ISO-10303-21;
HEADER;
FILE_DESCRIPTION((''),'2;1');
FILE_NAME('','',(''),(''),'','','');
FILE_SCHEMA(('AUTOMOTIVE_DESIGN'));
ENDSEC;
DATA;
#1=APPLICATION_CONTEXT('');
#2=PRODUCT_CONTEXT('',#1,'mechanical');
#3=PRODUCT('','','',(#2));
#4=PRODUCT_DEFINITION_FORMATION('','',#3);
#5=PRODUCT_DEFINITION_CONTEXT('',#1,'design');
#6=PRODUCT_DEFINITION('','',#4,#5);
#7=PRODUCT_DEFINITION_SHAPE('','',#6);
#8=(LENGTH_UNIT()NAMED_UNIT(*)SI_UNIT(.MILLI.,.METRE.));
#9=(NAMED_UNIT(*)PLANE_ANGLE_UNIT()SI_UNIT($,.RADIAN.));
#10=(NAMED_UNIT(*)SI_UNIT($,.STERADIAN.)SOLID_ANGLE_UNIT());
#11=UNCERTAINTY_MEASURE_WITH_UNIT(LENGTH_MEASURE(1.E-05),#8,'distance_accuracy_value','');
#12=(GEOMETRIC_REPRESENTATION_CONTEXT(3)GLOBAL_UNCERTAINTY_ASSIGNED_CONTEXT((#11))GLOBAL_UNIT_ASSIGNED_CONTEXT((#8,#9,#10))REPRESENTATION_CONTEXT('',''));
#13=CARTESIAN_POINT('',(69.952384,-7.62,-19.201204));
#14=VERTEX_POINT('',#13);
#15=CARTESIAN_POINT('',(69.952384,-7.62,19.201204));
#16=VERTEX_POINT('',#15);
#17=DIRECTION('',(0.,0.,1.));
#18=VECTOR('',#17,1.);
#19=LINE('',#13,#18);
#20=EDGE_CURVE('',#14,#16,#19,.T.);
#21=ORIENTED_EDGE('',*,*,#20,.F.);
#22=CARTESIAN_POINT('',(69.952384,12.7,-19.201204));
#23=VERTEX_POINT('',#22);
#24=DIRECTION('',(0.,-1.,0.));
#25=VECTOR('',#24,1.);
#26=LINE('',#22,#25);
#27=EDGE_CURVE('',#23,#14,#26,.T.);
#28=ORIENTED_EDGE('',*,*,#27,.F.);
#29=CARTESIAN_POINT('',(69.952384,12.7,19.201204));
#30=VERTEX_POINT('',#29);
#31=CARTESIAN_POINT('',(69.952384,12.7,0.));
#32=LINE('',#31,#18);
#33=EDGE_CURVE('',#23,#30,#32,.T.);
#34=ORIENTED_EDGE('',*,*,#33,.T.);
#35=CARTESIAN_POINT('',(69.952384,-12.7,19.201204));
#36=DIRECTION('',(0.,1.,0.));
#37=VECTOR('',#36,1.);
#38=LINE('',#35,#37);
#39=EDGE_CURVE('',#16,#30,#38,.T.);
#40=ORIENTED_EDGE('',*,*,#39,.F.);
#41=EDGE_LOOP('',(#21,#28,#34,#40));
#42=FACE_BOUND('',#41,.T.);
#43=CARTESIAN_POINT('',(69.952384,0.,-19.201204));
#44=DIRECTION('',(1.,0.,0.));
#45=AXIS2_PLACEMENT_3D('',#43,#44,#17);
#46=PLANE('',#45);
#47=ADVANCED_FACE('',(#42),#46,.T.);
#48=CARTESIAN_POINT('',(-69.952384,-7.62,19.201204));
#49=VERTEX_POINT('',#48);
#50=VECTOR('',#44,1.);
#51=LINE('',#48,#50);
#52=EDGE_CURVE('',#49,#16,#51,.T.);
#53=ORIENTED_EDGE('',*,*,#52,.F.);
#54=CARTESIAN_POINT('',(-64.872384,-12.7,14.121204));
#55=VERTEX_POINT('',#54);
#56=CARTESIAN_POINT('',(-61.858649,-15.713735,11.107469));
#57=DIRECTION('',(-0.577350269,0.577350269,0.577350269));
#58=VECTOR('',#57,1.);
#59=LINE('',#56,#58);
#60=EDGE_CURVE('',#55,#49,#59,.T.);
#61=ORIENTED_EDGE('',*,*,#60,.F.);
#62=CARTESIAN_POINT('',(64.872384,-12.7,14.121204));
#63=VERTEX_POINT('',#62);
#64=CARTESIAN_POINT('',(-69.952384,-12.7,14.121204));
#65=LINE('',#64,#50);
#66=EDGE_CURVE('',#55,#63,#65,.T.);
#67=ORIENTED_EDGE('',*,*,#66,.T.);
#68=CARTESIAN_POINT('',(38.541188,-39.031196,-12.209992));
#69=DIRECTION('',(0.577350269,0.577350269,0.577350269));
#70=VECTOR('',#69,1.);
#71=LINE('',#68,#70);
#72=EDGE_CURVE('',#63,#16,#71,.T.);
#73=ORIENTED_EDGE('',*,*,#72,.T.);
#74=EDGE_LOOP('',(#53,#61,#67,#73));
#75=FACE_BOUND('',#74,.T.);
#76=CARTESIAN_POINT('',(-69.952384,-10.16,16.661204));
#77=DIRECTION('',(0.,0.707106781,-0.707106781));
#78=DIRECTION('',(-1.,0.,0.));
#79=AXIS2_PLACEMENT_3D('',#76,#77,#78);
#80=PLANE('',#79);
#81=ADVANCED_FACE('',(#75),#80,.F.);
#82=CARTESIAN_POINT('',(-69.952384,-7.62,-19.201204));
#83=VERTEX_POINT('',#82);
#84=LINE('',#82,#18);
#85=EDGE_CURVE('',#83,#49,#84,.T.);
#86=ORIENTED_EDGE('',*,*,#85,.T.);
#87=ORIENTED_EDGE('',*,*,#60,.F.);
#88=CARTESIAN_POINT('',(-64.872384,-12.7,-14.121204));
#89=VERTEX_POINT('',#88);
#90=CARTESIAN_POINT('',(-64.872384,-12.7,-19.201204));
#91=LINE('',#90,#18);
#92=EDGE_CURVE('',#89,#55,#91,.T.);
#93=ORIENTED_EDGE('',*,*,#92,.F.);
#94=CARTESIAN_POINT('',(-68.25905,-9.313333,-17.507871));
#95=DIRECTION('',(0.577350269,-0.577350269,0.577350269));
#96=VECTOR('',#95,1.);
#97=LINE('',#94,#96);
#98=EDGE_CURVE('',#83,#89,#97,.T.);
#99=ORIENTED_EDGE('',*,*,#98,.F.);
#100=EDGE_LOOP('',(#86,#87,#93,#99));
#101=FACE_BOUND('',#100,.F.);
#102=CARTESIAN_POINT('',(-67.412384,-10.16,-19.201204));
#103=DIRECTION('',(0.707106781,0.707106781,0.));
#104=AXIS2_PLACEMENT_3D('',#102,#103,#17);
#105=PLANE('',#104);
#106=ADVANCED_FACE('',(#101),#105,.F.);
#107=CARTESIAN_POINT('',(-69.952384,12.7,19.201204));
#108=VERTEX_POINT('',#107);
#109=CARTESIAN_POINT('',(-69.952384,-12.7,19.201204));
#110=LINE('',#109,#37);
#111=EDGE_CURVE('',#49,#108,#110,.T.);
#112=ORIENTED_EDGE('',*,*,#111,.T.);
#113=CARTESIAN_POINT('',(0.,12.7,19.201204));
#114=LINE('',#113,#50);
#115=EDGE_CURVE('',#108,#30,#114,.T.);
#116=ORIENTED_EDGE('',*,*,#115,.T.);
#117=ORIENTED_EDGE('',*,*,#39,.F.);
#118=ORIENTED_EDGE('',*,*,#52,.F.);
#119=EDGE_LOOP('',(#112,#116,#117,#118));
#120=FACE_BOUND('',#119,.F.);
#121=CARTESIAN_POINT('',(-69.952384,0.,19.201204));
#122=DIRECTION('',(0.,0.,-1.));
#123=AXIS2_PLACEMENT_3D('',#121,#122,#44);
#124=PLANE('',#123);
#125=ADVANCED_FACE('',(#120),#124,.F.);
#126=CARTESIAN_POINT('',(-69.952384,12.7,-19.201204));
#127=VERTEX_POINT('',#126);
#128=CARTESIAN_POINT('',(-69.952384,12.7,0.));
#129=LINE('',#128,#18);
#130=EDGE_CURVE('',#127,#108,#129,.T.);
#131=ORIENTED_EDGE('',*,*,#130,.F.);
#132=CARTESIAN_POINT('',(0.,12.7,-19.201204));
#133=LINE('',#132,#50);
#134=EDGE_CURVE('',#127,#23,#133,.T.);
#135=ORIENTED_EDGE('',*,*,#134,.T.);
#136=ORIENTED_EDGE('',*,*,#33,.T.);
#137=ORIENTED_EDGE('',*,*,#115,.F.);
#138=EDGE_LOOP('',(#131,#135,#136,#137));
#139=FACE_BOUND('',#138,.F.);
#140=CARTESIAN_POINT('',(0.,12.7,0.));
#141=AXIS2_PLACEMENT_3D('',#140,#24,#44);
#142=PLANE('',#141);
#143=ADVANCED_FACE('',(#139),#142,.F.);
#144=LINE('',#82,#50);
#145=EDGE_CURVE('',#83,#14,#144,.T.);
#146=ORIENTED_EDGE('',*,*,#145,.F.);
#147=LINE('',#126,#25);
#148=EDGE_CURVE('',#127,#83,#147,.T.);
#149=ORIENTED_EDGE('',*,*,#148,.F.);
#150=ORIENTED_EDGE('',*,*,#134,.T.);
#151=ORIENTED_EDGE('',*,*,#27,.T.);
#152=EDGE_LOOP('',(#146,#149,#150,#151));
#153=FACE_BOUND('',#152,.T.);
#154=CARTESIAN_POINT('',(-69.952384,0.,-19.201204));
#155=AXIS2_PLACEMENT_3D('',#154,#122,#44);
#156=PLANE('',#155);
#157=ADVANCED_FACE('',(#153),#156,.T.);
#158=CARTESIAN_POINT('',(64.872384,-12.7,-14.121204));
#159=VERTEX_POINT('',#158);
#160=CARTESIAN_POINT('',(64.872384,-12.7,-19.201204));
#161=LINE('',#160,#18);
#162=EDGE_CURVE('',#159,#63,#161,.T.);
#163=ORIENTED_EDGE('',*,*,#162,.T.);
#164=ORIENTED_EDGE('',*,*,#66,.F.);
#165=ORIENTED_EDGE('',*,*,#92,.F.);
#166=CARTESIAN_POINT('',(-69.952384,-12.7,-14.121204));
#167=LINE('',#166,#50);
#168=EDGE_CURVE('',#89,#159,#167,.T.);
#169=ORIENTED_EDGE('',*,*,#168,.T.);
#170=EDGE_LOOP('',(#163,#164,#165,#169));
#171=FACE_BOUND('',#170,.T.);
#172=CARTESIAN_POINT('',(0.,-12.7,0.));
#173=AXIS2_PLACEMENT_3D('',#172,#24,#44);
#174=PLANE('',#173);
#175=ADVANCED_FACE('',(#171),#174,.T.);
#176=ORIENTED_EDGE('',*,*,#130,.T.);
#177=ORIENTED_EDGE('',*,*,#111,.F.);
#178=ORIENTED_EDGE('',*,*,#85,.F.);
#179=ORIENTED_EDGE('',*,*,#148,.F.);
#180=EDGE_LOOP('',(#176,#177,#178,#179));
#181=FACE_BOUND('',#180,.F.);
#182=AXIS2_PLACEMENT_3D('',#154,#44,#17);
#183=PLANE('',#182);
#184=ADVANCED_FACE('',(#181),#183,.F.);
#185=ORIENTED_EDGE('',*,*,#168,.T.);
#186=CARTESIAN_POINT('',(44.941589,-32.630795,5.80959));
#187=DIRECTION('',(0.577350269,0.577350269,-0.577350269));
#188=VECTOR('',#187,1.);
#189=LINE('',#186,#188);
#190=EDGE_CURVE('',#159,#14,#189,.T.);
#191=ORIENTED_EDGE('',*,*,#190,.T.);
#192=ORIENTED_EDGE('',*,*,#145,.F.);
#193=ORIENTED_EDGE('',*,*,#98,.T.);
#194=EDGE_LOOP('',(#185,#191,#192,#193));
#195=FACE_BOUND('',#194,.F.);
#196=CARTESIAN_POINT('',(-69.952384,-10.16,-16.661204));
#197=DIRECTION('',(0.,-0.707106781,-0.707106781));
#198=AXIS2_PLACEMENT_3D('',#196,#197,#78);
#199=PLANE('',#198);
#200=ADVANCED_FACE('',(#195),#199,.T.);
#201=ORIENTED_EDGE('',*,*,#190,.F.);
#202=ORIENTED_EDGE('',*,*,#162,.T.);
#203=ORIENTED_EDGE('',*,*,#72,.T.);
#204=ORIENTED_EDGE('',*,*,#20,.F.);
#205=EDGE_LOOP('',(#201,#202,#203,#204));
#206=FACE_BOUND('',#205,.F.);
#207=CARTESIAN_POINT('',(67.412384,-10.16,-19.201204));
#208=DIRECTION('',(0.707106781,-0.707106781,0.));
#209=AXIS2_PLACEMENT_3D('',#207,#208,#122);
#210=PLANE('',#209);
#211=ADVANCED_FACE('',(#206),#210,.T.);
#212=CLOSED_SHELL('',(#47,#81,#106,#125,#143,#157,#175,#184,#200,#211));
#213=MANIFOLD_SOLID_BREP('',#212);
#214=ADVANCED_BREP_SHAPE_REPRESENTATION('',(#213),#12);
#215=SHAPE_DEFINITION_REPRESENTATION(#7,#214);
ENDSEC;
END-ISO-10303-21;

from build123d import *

# Parameters (mm, degrees)
F0_W     = 139.9047672749
F0_H     = 38.4024083614
F1_DEPTH = 12.7
F2_DEPTH = 12.7
F3_SIZE  = 5.08


# Not quite as in the source:
# - the program builds the solid bodies; features that only make, move or delete a surface that nothing else refers to are left out


with BuildPart() as f1:
    # F0 (on Front) → F1 (new body)
    with BuildSketch(Plane.XZ):
        Rectangle(F0_W, F0_H)
    extrude(amount=F1_DEPTH)

    # F2 (add): a face of the model
    f2_faces = [f1.faces().sort_by_distance(p)[0] for p in [
        (0, 0, 0),
    ]]
    extrude(f2_faces, amount=F2_DEPTH)

    # F3
    f3_edges = [f1.edges().sort_by_distance(p)[0] for p in [
        (69.952384, -12.7, 0),
        (0, -12.7, 19.201204),
        (-69.952384, -12.7, 0),
        (0, -12.7, -19.201204),
    ]]
    chamfer(f3_edges, length=F3_SIZE)


solid = f1.part
